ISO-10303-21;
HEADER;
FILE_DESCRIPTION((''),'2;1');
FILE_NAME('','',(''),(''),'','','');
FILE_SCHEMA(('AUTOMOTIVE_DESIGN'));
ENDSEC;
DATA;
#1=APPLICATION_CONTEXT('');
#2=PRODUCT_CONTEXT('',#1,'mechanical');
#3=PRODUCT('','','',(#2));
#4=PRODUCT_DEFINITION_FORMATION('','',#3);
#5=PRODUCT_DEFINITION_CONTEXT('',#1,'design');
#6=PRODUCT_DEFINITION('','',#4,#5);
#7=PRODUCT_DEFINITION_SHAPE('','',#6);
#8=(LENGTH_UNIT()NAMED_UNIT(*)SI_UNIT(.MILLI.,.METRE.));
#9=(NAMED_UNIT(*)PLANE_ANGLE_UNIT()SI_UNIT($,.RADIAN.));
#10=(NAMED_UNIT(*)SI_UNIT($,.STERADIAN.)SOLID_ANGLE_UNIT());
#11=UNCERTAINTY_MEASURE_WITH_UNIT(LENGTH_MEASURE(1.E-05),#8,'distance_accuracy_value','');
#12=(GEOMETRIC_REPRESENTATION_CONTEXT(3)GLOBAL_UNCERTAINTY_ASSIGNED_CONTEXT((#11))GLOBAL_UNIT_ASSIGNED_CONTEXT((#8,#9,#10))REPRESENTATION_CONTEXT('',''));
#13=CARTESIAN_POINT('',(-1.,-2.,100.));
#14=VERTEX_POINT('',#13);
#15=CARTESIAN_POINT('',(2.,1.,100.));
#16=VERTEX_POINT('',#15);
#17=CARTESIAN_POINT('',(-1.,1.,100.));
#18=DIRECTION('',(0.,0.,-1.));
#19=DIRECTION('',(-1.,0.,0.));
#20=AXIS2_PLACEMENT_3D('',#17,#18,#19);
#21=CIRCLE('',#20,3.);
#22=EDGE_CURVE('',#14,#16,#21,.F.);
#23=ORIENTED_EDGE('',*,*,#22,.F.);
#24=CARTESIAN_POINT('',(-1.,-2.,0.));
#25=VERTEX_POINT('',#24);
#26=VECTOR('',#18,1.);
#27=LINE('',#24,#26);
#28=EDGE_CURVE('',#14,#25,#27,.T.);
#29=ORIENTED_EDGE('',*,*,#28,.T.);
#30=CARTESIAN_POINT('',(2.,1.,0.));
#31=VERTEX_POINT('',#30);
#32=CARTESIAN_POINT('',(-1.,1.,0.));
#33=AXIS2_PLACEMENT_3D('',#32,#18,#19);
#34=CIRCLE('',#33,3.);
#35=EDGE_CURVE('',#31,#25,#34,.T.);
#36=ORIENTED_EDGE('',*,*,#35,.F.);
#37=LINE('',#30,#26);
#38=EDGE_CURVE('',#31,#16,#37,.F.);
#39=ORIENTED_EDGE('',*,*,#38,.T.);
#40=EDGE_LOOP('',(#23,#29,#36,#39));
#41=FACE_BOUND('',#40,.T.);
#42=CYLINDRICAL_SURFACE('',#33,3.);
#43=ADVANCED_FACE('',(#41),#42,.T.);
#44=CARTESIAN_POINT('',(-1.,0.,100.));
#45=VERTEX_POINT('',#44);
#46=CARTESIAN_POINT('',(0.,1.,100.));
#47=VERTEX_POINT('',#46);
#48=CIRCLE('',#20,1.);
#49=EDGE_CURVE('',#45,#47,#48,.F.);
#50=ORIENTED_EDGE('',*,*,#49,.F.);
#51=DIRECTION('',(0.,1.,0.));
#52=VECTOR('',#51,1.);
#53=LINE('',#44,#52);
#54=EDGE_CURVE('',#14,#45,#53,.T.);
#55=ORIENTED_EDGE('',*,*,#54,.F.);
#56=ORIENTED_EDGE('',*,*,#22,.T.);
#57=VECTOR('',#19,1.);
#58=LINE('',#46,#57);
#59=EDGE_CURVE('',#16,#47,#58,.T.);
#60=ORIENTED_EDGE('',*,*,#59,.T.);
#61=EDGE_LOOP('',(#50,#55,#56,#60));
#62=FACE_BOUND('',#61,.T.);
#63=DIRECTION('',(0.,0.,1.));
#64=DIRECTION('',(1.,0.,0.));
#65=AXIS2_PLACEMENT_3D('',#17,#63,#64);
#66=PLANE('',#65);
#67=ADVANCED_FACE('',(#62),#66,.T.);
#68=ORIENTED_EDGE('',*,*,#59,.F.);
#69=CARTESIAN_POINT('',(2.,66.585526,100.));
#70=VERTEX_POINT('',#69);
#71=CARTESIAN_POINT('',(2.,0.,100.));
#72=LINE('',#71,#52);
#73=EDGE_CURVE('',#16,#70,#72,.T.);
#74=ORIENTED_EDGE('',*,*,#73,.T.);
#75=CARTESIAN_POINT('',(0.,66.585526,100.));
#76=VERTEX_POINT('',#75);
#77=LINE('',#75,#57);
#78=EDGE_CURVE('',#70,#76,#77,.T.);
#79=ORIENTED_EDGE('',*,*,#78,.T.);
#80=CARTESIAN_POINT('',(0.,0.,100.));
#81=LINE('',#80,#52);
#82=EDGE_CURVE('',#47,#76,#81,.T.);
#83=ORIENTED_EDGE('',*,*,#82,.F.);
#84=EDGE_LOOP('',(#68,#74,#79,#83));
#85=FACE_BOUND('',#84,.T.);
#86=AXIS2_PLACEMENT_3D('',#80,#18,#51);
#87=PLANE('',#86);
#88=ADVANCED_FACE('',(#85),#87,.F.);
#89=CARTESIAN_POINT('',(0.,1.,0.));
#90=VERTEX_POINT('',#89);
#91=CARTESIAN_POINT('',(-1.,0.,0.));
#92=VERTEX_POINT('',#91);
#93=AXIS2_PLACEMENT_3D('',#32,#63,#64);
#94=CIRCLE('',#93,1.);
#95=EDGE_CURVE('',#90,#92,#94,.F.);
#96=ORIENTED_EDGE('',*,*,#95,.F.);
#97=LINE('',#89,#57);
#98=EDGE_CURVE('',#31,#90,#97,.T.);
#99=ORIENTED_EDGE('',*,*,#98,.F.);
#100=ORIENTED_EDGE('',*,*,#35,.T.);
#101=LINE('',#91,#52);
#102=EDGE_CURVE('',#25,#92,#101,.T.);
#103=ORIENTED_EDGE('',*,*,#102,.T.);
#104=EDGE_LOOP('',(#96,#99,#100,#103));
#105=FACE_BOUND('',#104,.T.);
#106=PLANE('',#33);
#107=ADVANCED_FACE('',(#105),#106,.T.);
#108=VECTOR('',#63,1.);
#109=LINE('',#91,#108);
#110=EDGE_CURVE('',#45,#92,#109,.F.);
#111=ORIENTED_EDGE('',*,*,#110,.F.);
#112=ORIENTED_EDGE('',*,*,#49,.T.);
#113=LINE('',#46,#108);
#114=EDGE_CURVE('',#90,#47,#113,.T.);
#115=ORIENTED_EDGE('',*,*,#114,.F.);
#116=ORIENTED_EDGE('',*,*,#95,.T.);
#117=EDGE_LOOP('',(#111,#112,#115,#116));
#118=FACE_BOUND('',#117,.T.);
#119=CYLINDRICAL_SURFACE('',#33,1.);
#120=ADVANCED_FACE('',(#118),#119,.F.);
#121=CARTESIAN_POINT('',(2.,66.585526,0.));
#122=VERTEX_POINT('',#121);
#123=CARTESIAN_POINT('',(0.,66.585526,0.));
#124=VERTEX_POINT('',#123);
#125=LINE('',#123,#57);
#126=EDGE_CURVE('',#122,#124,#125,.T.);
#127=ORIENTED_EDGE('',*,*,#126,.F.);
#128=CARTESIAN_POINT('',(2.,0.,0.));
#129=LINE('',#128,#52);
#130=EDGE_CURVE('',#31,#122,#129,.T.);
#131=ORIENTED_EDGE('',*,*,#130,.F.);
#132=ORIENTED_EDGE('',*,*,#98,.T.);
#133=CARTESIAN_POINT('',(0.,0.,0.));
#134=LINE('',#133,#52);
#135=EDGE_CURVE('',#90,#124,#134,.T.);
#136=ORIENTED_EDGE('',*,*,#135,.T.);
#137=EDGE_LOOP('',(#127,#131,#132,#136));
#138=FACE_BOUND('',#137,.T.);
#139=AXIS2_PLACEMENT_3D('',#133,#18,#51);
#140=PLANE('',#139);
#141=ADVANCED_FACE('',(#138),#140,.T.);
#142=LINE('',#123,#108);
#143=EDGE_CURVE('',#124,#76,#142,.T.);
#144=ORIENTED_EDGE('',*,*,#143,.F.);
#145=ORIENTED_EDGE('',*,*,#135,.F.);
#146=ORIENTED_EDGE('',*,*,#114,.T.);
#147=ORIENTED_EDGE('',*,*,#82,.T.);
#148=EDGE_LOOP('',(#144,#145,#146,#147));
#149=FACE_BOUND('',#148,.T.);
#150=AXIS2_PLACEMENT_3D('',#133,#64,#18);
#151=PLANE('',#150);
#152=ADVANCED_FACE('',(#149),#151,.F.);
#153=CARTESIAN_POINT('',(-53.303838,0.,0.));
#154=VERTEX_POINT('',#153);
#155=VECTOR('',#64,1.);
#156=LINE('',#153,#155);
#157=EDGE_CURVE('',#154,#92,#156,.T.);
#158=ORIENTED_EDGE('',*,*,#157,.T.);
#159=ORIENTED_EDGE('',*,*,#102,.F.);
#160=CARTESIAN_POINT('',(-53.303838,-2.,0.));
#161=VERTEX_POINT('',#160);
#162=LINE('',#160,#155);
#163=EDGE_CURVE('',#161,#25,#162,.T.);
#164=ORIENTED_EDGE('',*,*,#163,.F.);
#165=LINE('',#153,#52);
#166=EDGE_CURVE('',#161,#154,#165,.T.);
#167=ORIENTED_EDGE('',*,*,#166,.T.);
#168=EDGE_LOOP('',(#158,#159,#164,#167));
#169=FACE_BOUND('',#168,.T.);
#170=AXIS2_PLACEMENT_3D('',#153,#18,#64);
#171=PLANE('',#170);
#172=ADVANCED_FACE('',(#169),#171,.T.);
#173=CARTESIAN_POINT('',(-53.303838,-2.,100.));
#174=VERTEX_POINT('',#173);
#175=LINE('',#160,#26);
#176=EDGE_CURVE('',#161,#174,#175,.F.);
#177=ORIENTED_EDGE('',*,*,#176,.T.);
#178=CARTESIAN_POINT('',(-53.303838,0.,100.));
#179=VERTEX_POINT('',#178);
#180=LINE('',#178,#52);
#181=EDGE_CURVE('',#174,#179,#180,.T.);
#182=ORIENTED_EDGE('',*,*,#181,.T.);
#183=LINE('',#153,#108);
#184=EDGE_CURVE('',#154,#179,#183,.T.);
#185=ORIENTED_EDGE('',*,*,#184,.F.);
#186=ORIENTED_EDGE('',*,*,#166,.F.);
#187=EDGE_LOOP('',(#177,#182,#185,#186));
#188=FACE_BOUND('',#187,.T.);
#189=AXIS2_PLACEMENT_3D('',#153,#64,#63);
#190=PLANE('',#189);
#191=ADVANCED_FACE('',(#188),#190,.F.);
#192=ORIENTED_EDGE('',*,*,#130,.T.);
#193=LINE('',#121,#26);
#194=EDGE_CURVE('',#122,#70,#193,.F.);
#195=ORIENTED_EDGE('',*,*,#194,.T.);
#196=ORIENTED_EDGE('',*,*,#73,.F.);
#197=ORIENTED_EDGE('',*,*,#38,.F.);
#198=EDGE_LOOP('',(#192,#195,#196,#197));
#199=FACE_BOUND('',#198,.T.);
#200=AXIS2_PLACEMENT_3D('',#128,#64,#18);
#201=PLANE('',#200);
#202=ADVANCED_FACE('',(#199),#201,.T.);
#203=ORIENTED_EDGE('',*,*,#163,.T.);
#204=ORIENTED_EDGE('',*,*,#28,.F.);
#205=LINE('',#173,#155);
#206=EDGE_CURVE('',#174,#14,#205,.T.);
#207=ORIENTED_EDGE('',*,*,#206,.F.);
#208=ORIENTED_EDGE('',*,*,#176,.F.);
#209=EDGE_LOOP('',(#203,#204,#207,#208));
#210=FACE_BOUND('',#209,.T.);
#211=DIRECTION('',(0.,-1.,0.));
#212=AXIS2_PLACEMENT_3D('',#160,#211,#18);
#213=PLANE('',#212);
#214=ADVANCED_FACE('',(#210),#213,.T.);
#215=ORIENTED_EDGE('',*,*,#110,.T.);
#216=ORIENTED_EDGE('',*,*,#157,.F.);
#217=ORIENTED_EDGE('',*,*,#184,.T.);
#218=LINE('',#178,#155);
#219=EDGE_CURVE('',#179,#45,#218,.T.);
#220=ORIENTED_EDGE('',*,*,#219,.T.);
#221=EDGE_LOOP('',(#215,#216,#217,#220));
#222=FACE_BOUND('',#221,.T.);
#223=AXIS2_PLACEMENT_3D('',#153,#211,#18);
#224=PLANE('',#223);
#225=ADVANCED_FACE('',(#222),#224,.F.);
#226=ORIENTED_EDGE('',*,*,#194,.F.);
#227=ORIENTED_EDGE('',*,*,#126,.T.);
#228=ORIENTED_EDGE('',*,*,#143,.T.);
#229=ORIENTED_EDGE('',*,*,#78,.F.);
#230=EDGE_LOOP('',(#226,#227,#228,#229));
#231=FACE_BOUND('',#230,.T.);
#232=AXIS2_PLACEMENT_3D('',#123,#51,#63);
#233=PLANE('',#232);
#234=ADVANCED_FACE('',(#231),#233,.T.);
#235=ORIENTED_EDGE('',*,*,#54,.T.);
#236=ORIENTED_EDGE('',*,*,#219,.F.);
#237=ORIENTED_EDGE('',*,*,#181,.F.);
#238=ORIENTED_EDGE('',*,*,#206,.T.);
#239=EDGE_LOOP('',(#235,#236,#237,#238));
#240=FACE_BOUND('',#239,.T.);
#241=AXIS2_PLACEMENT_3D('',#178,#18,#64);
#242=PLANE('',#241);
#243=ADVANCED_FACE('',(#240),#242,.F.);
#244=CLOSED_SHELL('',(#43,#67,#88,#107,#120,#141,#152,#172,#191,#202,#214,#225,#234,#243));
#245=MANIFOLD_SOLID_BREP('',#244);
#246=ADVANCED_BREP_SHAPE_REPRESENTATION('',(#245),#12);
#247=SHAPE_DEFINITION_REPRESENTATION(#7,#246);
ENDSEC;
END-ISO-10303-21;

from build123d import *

# Parameters (mm, degrees)
SHEET_EXTRUDE_1_1_DEPTH = 100
THICKEN_1_T2            = 2
SHEET_METAL_1_DEPTH     = 100
SHEET_METAL_1_2_DEPTH   = 100


# Read off the part's stored shape, not the designer's step: Преобразовать-Твердое тело1
with BuildPart() as body_1:
    # Sheet Extrude 1: a surface, the sketch's curves swept straight by 100 mm
    with BuildLine(Plane.XY, mode=Mode.PRIVATE) as sheet_extrude_1_1_path:
        Line((-53.303838415, 0), (0, 0))
        Line((0, 0), (0, 66.585525728))
    sheet_extrude_1_1 = Shell.extrude(sheet_extrude_1_1_path.wire(), (0 * SHEET_EXTRUDE_1_1_DEPTH, 0 * SHEET_EXTRUDE_1_1_DEPTH, 1 * SHEET_EXTRUDE_1_1_DEPTH))
    add(Solid.thicken(sheet_extrude_1_1, -THICKEN_1_T2))

    # Sheet Metal 1 outline → Sheet Metal 1 (cut)
    with BuildSketch(Plane.XY):
        with BuildLine():
            Line((2, -2), (2, 1))
            ThreePointArc((2, 1), (1.121320344, -1.121320344), (-1, -2))
            Line((-1, -2), (2, -2))
        make_face()
    extrude(amount=SHEET_METAL_1_DEPTH, mode=Mode.SUBTRACT)

    # Sheet Metal 1 2 outline → Sheet Metal 1 2 (add)
    with BuildSketch(Plane.XY):
        with BuildLine():
            Line((0, 0), (0, 1))
            ThreePointArc((0, 1), (-0.292893219, 0.292893219), (-1, 0))
            Line((-1, 0), (0, 0))
        make_face()
    extrude(amount=SHEET_METAL_1_2_DEPTH)


solid = body_1.part
